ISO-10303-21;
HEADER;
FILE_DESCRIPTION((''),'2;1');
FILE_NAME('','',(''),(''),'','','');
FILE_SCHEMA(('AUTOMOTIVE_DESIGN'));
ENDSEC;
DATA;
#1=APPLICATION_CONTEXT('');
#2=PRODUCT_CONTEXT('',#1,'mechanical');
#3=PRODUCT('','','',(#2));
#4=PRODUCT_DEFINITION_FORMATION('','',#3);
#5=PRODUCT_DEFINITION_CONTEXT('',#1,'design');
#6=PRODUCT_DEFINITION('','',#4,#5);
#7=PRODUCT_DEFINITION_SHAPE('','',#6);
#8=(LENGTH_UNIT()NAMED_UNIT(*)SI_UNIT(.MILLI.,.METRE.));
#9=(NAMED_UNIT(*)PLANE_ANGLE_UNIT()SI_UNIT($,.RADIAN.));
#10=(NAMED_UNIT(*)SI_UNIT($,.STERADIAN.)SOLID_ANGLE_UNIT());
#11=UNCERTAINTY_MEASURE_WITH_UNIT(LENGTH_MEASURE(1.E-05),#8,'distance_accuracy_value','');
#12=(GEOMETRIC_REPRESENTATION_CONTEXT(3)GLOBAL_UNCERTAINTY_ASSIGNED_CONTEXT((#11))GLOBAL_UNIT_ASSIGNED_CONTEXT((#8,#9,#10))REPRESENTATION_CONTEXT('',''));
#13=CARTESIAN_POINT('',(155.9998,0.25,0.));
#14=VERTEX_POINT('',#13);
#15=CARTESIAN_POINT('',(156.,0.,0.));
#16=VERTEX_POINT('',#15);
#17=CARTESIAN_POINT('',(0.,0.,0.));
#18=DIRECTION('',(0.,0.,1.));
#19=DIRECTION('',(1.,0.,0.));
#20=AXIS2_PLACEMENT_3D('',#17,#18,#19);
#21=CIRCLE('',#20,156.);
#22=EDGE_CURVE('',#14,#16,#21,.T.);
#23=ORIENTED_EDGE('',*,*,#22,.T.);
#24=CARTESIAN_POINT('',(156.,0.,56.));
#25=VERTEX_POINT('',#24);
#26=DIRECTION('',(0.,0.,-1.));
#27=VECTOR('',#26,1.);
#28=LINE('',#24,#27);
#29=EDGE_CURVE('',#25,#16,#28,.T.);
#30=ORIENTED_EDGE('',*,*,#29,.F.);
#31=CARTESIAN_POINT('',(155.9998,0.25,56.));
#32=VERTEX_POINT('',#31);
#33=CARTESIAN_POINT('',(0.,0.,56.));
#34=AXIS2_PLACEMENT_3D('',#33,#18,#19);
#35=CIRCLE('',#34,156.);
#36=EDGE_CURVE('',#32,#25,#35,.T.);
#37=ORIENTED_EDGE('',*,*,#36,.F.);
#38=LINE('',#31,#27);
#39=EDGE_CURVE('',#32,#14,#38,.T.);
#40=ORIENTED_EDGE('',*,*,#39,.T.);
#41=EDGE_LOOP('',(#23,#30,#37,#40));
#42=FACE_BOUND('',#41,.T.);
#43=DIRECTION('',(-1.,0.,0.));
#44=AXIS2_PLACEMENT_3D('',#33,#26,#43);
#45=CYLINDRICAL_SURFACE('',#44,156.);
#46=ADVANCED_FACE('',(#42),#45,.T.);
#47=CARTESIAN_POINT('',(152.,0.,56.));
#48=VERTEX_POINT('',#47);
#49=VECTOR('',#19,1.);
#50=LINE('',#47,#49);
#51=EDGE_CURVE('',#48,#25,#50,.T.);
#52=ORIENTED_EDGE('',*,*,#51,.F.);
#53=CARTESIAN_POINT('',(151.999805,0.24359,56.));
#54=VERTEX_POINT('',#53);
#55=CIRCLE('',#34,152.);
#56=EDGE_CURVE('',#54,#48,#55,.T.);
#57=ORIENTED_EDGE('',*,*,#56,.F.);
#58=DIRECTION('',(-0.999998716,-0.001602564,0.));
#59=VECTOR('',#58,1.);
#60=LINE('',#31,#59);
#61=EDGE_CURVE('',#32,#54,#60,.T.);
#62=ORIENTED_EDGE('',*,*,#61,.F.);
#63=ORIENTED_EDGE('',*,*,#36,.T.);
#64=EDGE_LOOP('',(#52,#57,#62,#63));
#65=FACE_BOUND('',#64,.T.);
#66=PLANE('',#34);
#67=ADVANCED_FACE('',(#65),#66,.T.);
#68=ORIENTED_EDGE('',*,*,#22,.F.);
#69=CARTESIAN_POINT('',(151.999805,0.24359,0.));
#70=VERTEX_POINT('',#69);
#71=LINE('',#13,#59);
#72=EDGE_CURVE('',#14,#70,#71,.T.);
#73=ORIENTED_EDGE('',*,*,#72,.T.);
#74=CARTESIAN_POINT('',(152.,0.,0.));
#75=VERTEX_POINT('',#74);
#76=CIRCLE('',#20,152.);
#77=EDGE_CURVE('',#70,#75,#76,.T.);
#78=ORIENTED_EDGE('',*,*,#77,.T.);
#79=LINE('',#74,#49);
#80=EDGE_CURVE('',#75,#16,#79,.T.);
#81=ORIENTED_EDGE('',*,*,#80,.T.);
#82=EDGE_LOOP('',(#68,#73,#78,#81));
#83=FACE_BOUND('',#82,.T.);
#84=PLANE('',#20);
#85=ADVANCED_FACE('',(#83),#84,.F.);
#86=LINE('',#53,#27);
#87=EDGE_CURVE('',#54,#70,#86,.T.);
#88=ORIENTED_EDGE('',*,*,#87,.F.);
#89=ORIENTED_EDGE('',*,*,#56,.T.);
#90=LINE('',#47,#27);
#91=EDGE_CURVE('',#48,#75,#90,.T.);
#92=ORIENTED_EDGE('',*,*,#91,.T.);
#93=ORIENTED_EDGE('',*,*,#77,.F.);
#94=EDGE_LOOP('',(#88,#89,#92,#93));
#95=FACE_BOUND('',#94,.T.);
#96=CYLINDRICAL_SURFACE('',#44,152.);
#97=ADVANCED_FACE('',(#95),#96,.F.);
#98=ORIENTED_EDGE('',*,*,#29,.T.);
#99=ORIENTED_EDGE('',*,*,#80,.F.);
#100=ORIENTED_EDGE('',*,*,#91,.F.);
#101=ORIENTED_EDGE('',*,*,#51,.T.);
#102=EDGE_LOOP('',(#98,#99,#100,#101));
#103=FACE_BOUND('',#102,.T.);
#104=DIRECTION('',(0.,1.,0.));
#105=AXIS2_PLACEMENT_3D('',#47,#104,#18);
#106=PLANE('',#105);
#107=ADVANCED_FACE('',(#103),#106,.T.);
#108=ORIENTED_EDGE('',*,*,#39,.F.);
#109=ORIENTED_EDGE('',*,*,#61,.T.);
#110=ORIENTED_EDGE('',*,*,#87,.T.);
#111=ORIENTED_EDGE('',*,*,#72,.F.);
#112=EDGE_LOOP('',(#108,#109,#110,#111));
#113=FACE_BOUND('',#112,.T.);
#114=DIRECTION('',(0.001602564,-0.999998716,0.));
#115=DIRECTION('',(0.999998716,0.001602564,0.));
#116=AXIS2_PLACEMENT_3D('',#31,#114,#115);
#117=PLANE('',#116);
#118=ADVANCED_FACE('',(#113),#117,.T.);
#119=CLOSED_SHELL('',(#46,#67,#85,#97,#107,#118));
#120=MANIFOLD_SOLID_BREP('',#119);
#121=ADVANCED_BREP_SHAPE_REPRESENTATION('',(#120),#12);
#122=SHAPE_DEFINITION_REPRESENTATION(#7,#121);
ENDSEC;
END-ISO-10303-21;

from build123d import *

# Parameters (mm, degrees)
BASE_FLANGE1_DEPTH = 56


# Sheet-metal steps are written as plain solids
with BuildPart() as part:
    # Sketch1 → Base-Flange1 (new body)
    with BuildSketch(Plane.XY):
        with BuildLine():
            ThreePointArc((155.999799679, 0.25), (-155.99994992, -0.12500004), (156, 0))
            Line((156, 0), (152, 0))
            ThreePointArc((152, 0), (-151.999951204, -0.121794911), (151.999804816, 0.243589744))
            Line((151.999804816, 0.243589744), (155.999799679, 0.25))
        make_face()
    extrude(amount=BASE_FLANGE1_DEPTH)


solid = part.part
